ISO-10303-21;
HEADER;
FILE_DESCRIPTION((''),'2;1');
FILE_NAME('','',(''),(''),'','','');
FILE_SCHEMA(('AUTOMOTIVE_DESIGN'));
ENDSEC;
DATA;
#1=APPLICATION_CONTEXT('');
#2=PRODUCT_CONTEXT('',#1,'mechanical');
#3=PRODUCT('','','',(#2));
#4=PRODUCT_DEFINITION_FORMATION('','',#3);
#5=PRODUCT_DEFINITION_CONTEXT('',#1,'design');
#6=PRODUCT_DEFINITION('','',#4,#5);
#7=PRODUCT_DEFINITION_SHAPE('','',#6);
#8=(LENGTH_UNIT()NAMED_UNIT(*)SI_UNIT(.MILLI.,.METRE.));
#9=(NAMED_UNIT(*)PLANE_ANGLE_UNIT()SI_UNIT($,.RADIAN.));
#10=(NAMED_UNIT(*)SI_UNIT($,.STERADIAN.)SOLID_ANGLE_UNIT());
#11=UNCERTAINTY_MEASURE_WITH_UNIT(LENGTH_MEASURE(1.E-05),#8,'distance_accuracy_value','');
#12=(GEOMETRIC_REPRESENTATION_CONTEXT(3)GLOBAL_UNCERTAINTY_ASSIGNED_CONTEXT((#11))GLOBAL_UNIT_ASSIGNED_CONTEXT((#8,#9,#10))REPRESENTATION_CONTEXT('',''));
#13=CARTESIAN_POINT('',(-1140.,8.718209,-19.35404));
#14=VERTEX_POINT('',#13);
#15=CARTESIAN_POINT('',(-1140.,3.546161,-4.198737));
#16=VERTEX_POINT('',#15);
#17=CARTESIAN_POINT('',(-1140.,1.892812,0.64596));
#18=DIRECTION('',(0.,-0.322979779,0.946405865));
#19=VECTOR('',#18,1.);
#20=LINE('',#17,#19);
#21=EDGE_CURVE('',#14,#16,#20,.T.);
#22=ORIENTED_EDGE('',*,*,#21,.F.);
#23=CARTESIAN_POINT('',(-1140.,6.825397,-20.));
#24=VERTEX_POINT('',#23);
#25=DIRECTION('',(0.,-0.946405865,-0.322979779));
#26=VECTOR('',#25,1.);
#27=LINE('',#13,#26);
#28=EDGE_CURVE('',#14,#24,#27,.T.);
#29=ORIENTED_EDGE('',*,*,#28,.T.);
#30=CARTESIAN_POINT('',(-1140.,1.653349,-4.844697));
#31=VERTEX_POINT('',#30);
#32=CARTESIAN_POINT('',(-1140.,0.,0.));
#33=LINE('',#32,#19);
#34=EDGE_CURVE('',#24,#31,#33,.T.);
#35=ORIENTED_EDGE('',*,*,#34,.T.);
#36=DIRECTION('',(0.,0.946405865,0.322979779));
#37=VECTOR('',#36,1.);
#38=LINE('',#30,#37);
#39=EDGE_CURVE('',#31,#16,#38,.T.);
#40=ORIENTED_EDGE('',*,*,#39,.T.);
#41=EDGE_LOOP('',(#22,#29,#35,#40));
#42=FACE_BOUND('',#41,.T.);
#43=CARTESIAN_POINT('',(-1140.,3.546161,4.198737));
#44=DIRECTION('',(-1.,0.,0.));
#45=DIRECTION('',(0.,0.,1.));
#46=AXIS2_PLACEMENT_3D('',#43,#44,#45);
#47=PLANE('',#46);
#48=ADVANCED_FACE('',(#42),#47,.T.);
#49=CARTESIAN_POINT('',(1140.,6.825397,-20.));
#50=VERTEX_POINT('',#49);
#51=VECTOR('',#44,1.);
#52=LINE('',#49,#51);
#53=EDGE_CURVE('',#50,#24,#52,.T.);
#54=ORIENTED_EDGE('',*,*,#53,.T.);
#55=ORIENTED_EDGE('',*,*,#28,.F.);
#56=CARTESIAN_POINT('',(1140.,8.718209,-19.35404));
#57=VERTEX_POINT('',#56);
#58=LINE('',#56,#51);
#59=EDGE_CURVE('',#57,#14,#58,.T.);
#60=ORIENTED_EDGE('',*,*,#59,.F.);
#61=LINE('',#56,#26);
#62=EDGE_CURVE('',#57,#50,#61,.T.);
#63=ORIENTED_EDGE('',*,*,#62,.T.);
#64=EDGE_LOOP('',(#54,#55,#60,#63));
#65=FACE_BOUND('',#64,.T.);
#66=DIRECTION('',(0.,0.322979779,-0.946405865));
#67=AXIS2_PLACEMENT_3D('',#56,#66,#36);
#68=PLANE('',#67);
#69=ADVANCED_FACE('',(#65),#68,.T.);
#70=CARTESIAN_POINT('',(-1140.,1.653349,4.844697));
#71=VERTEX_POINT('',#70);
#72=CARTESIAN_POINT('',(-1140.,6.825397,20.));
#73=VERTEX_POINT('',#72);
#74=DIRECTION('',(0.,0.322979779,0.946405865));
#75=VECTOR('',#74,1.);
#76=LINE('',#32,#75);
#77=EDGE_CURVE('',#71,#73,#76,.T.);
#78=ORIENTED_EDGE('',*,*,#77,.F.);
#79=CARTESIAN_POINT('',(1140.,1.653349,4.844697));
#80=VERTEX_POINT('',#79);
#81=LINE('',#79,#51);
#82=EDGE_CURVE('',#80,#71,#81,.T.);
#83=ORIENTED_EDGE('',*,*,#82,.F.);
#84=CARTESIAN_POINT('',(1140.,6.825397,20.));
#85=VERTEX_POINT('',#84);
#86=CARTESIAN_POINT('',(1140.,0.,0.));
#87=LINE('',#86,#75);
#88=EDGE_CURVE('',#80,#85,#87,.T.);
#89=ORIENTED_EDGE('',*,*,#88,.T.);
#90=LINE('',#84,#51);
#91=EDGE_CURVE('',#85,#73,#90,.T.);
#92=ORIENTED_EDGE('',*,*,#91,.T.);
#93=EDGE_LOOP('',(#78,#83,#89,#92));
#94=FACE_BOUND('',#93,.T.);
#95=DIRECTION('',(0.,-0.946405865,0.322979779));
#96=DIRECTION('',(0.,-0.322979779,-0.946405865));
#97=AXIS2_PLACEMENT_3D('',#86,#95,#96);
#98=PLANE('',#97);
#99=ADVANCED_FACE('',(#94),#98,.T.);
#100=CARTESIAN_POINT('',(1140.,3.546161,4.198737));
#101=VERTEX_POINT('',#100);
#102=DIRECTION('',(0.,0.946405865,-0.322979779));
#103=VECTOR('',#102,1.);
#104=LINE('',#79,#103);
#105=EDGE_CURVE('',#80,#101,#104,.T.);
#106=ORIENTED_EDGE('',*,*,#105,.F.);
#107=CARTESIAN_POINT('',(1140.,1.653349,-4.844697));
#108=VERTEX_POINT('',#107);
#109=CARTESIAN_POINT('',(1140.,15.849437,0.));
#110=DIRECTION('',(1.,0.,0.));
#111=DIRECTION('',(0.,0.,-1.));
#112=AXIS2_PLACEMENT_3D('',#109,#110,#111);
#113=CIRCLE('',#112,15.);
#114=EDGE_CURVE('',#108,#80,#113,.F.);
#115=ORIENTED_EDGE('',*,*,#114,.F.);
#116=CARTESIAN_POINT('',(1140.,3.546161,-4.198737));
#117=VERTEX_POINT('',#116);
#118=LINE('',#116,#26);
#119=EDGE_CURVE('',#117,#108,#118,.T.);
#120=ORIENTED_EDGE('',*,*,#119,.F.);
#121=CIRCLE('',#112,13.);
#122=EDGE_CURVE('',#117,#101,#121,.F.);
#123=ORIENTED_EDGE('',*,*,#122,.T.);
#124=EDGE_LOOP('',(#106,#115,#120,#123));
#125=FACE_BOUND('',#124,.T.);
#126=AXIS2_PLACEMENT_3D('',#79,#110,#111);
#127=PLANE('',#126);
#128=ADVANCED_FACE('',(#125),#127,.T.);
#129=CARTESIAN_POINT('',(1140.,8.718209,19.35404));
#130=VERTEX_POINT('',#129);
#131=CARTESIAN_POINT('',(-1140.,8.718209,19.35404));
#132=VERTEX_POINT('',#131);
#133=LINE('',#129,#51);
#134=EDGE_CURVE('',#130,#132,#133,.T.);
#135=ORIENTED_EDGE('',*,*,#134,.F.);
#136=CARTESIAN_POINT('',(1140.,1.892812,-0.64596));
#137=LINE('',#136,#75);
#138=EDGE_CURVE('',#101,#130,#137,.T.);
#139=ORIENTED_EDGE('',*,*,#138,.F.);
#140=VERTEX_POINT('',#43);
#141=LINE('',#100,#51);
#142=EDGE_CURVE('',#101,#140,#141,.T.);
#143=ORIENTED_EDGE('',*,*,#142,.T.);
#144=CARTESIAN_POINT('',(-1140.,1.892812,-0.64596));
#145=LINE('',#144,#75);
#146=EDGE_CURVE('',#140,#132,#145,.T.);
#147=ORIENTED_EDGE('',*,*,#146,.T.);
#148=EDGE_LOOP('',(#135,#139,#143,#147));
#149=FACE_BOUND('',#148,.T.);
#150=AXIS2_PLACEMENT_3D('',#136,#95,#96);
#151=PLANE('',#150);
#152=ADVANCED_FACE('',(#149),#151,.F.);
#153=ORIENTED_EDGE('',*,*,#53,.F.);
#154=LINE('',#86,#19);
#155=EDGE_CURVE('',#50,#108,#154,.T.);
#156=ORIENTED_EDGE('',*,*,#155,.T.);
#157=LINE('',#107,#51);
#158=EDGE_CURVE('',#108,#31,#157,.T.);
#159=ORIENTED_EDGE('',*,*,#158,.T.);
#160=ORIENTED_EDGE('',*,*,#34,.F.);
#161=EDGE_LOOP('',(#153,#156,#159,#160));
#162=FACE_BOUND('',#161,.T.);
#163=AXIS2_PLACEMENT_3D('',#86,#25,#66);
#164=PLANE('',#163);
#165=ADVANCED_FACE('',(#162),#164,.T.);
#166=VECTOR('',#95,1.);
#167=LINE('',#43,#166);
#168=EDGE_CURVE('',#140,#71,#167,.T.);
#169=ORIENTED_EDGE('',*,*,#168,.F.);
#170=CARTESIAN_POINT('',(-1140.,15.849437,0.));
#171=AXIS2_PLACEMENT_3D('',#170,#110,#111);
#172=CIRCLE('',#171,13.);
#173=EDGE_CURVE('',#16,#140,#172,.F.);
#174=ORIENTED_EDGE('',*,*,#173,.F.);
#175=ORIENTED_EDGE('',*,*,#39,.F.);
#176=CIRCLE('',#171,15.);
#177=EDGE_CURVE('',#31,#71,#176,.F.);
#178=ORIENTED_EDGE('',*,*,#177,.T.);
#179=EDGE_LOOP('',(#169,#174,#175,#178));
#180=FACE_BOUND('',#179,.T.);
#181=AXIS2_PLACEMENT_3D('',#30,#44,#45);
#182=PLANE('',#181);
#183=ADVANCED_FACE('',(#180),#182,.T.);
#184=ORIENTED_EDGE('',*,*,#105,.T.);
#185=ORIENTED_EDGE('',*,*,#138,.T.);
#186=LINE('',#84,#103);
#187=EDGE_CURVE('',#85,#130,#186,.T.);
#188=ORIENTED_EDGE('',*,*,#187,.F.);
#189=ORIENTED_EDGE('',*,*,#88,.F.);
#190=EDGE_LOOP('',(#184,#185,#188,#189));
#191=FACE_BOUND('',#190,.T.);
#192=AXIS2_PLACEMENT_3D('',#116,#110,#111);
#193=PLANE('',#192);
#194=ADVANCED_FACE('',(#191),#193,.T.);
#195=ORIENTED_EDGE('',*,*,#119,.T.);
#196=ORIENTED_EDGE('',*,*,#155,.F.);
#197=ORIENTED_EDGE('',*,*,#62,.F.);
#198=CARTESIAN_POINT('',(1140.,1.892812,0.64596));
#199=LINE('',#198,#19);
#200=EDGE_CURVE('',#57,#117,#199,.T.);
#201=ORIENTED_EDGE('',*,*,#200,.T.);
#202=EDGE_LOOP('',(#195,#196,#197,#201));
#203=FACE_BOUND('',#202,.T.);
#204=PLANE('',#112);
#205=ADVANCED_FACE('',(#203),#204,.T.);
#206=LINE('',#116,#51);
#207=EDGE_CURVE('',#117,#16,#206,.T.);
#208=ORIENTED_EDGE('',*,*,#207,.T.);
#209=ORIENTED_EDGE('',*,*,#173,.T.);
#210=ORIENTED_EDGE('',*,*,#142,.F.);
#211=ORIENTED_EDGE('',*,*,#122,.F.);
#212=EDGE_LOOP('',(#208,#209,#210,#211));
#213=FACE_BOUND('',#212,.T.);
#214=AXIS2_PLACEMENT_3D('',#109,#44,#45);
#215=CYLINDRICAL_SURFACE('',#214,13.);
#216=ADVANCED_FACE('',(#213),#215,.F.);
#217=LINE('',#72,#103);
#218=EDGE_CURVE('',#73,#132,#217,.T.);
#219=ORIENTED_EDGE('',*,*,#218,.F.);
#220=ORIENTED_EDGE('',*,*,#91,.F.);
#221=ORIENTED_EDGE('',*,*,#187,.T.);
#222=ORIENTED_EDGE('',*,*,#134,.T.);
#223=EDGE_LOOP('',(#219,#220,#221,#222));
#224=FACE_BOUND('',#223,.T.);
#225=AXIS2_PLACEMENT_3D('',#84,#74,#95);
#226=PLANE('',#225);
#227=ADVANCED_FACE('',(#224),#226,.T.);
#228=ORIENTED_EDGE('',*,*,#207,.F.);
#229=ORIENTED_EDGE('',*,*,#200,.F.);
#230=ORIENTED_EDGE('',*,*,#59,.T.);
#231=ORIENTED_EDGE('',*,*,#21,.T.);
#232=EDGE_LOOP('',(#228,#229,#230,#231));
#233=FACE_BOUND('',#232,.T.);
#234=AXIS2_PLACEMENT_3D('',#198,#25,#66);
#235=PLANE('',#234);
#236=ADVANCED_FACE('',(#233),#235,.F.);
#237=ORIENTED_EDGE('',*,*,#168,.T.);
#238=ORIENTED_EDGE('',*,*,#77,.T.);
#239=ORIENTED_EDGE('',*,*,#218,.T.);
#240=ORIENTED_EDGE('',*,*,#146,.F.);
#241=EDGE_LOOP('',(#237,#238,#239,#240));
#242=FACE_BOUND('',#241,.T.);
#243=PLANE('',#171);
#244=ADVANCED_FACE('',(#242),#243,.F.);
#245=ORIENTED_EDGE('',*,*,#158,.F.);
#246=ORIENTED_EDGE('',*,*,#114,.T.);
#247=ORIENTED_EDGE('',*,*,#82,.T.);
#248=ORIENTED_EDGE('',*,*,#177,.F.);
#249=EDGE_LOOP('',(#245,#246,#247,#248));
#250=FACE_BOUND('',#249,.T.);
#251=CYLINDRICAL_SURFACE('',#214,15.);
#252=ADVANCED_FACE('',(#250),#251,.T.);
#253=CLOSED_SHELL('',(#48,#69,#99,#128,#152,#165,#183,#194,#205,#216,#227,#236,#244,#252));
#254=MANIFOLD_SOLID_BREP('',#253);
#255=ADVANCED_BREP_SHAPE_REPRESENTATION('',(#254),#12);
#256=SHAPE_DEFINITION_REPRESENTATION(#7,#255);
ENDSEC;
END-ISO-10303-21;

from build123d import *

# Parameters (mm, degrees)
BASE_FLANGE1_DEPTH = 1140


# Sheet-metal steps are written as plain solids
with BuildPart() as part:
    # Sketch1 → Base-Flange1 (new, symmetric)
    with BuildSketch(Plane(origin=(0, 0, 0), x_dir=(0, 0, -1), z_dir=(1, 0, 0))):
        with BuildLine():
            Line((-20, 6.825396825), (-4.844696692, 1.653348871))
            ThreePointArc((-4.844696692, 1.653348871), (0, 0.849436852), (4.844696692, 1.653348871))
            Line((4.844696692, 1.653348871), (20, 6.825396825))
            Line((20, 6.825396825), (19.354040441, 8.718208556))
            Line((19.354040441, 8.718208556), (4.198737133, 3.546160602))
            ThreePointArc((4.198737133, 3.546160602), (0, 2.849436852), (-4.198737133, 3.546160602))
            Line((-4.198737133, 3.546160602), (-19.354040441, 8.718208556))
            Line((-19.354040441, 8.718208556), (-20, 6.825396825))
        make_face()
    extrude(amount=BASE_FLANGE1_DEPTH, both=True)


solid = part.part
